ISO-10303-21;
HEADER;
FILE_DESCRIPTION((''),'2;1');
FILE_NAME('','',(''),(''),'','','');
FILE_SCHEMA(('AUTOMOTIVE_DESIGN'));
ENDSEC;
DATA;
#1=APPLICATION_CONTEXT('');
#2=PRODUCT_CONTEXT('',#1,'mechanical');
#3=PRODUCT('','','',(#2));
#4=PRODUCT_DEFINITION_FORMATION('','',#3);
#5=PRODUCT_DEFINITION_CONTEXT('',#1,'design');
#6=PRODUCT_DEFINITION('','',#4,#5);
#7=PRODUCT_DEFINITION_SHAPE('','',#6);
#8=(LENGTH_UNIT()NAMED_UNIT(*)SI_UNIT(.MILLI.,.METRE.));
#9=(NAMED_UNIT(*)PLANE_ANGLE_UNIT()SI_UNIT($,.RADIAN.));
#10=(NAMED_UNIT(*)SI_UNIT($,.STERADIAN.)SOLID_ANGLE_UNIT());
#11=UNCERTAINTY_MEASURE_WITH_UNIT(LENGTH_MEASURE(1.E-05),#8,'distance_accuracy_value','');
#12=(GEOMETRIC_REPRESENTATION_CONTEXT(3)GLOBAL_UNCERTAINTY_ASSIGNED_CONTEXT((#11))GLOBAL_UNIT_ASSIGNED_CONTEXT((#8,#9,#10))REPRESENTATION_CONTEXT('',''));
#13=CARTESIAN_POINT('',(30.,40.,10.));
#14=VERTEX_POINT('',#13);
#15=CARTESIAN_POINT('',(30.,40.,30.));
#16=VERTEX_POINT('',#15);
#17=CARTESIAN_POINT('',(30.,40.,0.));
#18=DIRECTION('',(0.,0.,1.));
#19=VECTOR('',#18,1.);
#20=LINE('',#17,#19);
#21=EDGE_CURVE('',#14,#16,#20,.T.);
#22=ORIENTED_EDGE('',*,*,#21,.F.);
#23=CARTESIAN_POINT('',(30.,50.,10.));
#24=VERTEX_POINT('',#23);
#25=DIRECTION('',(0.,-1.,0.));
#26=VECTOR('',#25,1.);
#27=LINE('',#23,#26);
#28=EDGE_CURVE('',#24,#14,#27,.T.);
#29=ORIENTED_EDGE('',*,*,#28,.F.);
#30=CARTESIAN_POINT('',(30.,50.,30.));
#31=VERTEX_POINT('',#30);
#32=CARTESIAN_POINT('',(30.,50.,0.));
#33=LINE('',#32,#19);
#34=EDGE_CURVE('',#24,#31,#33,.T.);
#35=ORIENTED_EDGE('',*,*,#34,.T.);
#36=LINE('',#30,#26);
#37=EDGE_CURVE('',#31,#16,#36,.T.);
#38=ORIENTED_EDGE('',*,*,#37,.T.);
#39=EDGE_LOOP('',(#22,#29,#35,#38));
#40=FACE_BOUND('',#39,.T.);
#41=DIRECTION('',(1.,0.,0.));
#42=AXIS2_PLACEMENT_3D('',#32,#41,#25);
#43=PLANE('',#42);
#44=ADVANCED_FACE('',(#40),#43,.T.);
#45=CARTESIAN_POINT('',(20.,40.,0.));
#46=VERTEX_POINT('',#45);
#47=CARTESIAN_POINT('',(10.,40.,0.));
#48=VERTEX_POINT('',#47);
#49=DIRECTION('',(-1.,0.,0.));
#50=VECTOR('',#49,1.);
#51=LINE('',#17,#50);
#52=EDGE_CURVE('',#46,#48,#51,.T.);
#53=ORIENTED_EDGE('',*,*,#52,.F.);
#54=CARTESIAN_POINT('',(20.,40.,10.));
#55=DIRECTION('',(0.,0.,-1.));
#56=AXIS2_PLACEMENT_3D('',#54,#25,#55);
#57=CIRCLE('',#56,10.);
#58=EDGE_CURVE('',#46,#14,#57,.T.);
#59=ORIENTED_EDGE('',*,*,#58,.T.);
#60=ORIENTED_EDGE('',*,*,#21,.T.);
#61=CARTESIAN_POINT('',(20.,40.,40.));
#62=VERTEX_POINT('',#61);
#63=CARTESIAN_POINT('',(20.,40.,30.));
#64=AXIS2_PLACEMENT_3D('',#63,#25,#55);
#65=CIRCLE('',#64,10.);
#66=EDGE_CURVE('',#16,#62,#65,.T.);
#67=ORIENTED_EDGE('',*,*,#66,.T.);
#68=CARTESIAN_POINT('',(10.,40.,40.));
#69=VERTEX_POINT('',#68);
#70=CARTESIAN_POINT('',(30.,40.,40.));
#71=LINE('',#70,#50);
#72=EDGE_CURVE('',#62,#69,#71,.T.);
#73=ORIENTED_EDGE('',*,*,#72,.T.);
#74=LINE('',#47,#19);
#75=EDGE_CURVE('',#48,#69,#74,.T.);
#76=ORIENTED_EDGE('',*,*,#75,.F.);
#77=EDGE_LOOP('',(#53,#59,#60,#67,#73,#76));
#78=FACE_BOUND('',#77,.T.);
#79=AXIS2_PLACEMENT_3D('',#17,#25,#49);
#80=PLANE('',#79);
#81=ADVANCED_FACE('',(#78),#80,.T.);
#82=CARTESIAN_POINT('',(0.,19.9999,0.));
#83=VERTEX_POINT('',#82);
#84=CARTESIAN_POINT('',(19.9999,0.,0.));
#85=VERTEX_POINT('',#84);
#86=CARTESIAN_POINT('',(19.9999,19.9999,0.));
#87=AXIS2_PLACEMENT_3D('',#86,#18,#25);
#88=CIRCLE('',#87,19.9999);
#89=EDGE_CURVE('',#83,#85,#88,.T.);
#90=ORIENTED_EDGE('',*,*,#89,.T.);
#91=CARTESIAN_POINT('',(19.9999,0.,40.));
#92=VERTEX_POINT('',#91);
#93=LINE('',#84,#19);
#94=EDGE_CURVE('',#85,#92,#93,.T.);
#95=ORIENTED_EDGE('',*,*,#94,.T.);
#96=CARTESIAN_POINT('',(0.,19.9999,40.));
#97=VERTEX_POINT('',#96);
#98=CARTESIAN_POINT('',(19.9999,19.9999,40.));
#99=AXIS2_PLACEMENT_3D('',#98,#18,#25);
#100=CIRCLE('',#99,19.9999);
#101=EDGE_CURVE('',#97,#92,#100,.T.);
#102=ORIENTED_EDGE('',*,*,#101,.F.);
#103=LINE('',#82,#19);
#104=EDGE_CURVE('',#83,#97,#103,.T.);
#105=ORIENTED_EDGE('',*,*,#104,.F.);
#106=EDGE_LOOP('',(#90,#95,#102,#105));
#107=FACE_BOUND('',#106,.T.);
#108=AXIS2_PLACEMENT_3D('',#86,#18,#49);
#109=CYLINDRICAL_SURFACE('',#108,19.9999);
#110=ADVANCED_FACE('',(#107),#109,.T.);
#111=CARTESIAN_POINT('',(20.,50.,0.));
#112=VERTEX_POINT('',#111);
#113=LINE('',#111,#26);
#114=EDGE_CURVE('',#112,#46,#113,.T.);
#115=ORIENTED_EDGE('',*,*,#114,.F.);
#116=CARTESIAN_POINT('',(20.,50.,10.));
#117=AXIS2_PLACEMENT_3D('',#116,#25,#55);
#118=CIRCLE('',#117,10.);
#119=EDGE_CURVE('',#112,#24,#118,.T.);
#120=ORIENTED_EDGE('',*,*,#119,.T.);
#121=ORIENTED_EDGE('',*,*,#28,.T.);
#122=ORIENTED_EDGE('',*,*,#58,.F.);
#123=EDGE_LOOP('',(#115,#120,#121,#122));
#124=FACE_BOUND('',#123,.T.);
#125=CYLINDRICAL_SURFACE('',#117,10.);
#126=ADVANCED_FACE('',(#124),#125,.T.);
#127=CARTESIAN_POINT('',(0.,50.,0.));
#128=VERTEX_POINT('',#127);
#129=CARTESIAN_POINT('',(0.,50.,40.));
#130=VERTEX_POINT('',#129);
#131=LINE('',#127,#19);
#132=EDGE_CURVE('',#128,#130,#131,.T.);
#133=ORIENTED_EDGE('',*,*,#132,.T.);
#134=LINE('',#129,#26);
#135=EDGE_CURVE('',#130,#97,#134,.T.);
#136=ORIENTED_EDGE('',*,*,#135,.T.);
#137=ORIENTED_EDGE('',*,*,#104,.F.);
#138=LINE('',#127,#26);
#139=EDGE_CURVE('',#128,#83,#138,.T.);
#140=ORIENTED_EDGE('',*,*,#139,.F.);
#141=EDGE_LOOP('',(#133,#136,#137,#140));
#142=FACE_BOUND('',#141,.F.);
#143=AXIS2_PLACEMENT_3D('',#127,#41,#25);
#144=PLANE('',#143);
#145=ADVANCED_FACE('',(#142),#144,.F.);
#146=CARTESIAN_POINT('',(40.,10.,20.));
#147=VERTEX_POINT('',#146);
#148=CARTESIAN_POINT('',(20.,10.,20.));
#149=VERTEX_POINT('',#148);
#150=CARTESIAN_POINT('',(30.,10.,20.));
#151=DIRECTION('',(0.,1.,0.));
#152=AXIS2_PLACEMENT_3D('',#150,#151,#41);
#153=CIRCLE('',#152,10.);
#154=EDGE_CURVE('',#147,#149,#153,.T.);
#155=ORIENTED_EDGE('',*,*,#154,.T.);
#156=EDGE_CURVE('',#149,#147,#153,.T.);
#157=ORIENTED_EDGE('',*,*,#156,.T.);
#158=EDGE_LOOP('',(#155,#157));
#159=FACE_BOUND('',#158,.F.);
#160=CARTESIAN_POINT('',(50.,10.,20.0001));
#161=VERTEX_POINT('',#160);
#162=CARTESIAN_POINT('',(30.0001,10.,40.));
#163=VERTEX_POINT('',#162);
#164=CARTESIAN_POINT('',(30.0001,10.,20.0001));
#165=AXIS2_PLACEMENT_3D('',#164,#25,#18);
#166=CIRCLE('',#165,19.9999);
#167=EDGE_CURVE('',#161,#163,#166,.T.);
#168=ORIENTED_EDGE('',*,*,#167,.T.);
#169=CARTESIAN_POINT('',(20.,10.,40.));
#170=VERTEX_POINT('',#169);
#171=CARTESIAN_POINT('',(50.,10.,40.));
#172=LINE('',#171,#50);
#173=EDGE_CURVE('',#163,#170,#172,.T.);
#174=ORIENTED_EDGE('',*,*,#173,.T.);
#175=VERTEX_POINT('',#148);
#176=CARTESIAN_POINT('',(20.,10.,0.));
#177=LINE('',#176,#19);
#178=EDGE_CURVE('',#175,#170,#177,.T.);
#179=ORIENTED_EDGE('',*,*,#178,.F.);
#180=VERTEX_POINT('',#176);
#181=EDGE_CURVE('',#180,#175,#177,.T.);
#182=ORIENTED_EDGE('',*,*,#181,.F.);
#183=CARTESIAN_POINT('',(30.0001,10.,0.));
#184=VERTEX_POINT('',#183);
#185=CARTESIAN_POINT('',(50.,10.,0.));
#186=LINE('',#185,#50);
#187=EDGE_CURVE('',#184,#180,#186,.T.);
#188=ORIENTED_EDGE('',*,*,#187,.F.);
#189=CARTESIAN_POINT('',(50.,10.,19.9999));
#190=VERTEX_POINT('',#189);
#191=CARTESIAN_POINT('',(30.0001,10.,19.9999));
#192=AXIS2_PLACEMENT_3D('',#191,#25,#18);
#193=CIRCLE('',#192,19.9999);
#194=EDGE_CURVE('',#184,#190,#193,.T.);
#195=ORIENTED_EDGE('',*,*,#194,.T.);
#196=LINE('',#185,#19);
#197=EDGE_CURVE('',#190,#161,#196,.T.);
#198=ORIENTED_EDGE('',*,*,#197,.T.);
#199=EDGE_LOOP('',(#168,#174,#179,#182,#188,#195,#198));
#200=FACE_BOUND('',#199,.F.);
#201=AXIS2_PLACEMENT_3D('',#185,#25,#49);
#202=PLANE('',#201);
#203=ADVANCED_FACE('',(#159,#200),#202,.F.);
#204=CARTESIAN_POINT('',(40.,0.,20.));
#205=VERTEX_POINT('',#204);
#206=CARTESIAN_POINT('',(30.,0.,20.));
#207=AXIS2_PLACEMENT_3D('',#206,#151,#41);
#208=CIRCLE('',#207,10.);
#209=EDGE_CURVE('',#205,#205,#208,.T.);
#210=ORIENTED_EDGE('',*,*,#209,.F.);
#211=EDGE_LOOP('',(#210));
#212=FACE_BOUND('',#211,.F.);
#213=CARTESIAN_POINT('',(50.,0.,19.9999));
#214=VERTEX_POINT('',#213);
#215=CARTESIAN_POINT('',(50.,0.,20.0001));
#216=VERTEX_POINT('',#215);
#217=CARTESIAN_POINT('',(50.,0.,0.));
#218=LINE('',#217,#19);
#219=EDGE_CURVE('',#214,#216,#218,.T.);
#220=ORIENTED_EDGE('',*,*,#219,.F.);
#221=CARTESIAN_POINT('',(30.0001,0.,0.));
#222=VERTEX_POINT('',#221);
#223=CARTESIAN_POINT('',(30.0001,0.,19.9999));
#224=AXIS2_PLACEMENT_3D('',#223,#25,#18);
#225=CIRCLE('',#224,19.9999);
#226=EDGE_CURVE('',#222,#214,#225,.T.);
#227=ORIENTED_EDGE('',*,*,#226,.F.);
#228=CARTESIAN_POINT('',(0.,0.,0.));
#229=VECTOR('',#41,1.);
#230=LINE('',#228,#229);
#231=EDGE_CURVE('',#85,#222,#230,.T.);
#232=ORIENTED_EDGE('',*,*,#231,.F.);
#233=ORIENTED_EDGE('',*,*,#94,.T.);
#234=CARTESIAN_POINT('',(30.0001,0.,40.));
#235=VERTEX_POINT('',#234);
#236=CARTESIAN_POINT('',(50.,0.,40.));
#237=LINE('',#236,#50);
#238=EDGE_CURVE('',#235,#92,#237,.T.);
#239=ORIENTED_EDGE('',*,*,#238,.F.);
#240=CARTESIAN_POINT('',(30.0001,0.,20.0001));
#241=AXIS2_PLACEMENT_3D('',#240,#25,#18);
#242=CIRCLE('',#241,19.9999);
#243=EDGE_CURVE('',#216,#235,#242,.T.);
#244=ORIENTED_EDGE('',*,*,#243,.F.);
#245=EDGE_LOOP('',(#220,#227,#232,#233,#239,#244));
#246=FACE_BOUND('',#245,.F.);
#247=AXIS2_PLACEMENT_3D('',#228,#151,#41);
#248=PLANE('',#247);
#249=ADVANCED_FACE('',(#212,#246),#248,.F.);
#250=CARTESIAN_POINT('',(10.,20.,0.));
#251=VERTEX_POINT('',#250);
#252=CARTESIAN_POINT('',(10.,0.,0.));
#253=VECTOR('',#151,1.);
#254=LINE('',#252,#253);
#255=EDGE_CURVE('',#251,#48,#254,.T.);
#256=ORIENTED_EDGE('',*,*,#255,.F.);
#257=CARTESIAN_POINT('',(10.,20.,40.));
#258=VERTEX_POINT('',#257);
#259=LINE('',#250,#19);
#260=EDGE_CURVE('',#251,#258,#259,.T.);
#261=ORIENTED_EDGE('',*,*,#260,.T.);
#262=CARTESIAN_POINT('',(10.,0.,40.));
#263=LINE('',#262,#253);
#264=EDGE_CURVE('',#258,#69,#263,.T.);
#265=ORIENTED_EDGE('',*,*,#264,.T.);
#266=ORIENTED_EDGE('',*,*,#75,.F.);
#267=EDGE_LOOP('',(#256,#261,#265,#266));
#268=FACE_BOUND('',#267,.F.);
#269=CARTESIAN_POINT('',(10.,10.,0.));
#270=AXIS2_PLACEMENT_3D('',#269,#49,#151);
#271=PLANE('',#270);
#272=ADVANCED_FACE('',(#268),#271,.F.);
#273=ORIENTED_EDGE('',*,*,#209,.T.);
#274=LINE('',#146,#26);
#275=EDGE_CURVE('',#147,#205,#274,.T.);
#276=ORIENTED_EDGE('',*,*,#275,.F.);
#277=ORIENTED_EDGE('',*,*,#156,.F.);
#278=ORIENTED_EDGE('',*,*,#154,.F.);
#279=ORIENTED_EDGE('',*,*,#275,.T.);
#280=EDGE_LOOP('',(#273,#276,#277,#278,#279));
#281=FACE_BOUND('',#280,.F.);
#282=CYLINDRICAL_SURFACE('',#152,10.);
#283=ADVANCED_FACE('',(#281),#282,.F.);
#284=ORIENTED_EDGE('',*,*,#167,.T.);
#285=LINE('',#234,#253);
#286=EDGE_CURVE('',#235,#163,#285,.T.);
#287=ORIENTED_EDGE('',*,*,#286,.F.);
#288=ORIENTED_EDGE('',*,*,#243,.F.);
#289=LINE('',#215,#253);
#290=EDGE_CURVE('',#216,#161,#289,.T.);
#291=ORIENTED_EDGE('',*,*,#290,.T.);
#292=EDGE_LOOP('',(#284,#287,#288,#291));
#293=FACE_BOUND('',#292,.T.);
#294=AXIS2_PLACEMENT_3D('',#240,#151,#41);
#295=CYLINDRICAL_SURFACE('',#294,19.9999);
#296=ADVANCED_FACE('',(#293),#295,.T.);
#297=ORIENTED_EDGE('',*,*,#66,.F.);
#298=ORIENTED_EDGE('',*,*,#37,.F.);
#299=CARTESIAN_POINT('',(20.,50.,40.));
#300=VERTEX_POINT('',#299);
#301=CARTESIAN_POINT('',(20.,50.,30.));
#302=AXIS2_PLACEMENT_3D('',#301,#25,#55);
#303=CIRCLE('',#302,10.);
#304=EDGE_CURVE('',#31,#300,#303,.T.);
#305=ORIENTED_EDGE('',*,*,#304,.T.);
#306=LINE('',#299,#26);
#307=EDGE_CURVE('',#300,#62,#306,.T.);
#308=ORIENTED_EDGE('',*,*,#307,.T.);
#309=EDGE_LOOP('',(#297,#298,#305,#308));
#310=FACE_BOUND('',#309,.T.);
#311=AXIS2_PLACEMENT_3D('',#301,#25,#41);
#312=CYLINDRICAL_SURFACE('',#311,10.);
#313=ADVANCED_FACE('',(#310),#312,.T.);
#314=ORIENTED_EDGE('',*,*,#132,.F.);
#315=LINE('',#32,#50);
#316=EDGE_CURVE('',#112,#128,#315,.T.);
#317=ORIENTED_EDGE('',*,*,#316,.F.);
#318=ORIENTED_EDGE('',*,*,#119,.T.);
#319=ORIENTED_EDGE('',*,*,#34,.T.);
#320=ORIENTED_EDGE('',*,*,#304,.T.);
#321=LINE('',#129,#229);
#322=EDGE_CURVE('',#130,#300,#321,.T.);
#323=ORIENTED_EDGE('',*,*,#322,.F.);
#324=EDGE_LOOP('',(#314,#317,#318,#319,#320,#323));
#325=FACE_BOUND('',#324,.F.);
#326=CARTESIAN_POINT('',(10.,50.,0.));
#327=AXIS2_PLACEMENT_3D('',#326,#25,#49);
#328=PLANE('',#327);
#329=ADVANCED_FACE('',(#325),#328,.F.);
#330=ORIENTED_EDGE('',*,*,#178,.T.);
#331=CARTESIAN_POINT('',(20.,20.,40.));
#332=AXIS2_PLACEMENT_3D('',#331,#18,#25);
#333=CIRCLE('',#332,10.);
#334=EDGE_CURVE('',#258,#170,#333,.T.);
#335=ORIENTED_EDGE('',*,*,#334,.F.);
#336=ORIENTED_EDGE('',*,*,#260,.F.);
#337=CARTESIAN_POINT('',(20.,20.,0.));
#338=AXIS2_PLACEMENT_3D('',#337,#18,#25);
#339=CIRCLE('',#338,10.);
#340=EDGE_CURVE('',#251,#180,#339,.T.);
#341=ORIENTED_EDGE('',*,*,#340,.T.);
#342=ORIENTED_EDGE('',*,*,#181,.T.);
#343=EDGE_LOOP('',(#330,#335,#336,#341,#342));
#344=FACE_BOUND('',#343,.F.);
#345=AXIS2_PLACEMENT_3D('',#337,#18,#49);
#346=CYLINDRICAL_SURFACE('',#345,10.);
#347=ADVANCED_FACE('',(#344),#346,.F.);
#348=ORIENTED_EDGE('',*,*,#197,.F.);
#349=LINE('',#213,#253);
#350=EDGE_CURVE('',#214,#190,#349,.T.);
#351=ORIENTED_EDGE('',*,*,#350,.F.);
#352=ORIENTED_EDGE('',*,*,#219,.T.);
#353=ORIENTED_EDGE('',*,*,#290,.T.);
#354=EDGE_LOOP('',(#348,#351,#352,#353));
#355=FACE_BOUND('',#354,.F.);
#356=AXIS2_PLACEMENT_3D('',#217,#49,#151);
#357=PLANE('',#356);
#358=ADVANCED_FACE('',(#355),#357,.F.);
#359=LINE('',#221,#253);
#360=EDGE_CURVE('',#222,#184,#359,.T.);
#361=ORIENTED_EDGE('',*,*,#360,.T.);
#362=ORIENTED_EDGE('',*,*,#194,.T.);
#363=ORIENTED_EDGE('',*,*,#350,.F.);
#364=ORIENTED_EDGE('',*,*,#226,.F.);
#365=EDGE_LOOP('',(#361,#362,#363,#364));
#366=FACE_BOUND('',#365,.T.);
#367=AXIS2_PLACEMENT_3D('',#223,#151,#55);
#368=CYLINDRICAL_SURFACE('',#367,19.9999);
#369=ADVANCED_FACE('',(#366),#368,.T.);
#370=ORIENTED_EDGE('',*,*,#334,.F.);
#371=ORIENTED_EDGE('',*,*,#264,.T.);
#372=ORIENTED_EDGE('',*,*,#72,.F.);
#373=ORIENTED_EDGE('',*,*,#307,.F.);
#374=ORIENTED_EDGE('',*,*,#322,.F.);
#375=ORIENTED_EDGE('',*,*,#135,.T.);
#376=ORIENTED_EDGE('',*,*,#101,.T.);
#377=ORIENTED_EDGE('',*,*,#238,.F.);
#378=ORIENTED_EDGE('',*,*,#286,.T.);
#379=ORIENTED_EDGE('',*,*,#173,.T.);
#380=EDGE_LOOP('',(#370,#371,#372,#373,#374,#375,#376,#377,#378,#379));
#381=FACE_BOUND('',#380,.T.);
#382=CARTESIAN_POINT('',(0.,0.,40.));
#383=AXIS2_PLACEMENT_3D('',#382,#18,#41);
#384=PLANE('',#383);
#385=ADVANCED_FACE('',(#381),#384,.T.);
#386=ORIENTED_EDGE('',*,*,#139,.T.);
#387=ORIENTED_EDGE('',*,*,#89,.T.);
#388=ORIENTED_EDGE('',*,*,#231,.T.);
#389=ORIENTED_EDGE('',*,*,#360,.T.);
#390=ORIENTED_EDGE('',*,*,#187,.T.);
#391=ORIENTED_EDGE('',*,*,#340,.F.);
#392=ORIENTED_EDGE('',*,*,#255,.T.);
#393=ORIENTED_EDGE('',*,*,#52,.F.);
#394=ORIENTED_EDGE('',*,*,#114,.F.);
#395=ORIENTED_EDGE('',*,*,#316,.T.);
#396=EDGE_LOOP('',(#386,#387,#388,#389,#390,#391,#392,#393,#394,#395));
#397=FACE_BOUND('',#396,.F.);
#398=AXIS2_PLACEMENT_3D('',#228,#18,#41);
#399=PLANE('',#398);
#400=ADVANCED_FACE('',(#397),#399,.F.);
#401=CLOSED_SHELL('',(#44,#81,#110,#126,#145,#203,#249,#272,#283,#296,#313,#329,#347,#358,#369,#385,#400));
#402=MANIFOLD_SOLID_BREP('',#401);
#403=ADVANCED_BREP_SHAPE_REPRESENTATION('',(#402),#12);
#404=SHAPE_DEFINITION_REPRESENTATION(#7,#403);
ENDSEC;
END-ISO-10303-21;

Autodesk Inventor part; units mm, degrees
ref_plane "YZ Plane" through (0, 0, 0) normal (1, 0, 0) x (0, 1, 0)
ref_plane "XZ Plane" through (0, 0, 0) normal (0, 1, 0) x (-1, 0, 0)
ref_plane "XY Plane" through (0, 0, 0) normal (0, 0, 1) x (1, 0, 0)
sketch "草圖1" plane through (0, 0, 0) normal (0, 0, 1) x (1, 0, 0)
  line L0 (0, 0) -> (10, 0)
  line L1 (10, 0) -> (10, 50)
  line L2 (10, 50) -> (0, 50)
  line L3 (0, 50) -> (0, 0)
  line L4 (10, 0) -> (50, 0)
  line L5 (50, 0) -> (50, 10)
  line L6 (50, 10) -> (10, 10)
  line L7 (10, 10) -> (10, 0)
  line L8 (10, 50) -> (30, 50)
  line L9 (30, 50) -> (30, 40)
  line L10 (30, 40) -> (10, 40)
  line L11 (10, 40) -> (10, 50)
  dimension "d0" = 10
  dimension "d1" = 10
  dimension "d2" = 20
  dimension "d3" = 40
  dimension "d4" = 10
  dimension "d5" = 50
extrude "擠出1" add sketch "草圖1" along normal blind 40
fillet "圓角1" radius 10 1 edges at (10, 10, 20)
fillet "圓角2" radius 10 2 edges at (30, 45, 40) (30, 45, 0)
fillet "圓角3" radius 20 3 edges at (0, 0, 20) (50, 5, 40) (50, 5, 0)
sketch "草圖2" plane through (20, 10, 40) normal (0, 1, 0) x (1, 0, 0)
  arc A0 (10, 0) -> (10, 40) centre (10, 20) ccw projected
  circle A1 centre (10, 20) radius 10
  point P0 (-20, 40)
  dimension "d11" = 20
extrude "擠出2" cut sketch "草圖2" against normal blind 40
properties part number "18"
